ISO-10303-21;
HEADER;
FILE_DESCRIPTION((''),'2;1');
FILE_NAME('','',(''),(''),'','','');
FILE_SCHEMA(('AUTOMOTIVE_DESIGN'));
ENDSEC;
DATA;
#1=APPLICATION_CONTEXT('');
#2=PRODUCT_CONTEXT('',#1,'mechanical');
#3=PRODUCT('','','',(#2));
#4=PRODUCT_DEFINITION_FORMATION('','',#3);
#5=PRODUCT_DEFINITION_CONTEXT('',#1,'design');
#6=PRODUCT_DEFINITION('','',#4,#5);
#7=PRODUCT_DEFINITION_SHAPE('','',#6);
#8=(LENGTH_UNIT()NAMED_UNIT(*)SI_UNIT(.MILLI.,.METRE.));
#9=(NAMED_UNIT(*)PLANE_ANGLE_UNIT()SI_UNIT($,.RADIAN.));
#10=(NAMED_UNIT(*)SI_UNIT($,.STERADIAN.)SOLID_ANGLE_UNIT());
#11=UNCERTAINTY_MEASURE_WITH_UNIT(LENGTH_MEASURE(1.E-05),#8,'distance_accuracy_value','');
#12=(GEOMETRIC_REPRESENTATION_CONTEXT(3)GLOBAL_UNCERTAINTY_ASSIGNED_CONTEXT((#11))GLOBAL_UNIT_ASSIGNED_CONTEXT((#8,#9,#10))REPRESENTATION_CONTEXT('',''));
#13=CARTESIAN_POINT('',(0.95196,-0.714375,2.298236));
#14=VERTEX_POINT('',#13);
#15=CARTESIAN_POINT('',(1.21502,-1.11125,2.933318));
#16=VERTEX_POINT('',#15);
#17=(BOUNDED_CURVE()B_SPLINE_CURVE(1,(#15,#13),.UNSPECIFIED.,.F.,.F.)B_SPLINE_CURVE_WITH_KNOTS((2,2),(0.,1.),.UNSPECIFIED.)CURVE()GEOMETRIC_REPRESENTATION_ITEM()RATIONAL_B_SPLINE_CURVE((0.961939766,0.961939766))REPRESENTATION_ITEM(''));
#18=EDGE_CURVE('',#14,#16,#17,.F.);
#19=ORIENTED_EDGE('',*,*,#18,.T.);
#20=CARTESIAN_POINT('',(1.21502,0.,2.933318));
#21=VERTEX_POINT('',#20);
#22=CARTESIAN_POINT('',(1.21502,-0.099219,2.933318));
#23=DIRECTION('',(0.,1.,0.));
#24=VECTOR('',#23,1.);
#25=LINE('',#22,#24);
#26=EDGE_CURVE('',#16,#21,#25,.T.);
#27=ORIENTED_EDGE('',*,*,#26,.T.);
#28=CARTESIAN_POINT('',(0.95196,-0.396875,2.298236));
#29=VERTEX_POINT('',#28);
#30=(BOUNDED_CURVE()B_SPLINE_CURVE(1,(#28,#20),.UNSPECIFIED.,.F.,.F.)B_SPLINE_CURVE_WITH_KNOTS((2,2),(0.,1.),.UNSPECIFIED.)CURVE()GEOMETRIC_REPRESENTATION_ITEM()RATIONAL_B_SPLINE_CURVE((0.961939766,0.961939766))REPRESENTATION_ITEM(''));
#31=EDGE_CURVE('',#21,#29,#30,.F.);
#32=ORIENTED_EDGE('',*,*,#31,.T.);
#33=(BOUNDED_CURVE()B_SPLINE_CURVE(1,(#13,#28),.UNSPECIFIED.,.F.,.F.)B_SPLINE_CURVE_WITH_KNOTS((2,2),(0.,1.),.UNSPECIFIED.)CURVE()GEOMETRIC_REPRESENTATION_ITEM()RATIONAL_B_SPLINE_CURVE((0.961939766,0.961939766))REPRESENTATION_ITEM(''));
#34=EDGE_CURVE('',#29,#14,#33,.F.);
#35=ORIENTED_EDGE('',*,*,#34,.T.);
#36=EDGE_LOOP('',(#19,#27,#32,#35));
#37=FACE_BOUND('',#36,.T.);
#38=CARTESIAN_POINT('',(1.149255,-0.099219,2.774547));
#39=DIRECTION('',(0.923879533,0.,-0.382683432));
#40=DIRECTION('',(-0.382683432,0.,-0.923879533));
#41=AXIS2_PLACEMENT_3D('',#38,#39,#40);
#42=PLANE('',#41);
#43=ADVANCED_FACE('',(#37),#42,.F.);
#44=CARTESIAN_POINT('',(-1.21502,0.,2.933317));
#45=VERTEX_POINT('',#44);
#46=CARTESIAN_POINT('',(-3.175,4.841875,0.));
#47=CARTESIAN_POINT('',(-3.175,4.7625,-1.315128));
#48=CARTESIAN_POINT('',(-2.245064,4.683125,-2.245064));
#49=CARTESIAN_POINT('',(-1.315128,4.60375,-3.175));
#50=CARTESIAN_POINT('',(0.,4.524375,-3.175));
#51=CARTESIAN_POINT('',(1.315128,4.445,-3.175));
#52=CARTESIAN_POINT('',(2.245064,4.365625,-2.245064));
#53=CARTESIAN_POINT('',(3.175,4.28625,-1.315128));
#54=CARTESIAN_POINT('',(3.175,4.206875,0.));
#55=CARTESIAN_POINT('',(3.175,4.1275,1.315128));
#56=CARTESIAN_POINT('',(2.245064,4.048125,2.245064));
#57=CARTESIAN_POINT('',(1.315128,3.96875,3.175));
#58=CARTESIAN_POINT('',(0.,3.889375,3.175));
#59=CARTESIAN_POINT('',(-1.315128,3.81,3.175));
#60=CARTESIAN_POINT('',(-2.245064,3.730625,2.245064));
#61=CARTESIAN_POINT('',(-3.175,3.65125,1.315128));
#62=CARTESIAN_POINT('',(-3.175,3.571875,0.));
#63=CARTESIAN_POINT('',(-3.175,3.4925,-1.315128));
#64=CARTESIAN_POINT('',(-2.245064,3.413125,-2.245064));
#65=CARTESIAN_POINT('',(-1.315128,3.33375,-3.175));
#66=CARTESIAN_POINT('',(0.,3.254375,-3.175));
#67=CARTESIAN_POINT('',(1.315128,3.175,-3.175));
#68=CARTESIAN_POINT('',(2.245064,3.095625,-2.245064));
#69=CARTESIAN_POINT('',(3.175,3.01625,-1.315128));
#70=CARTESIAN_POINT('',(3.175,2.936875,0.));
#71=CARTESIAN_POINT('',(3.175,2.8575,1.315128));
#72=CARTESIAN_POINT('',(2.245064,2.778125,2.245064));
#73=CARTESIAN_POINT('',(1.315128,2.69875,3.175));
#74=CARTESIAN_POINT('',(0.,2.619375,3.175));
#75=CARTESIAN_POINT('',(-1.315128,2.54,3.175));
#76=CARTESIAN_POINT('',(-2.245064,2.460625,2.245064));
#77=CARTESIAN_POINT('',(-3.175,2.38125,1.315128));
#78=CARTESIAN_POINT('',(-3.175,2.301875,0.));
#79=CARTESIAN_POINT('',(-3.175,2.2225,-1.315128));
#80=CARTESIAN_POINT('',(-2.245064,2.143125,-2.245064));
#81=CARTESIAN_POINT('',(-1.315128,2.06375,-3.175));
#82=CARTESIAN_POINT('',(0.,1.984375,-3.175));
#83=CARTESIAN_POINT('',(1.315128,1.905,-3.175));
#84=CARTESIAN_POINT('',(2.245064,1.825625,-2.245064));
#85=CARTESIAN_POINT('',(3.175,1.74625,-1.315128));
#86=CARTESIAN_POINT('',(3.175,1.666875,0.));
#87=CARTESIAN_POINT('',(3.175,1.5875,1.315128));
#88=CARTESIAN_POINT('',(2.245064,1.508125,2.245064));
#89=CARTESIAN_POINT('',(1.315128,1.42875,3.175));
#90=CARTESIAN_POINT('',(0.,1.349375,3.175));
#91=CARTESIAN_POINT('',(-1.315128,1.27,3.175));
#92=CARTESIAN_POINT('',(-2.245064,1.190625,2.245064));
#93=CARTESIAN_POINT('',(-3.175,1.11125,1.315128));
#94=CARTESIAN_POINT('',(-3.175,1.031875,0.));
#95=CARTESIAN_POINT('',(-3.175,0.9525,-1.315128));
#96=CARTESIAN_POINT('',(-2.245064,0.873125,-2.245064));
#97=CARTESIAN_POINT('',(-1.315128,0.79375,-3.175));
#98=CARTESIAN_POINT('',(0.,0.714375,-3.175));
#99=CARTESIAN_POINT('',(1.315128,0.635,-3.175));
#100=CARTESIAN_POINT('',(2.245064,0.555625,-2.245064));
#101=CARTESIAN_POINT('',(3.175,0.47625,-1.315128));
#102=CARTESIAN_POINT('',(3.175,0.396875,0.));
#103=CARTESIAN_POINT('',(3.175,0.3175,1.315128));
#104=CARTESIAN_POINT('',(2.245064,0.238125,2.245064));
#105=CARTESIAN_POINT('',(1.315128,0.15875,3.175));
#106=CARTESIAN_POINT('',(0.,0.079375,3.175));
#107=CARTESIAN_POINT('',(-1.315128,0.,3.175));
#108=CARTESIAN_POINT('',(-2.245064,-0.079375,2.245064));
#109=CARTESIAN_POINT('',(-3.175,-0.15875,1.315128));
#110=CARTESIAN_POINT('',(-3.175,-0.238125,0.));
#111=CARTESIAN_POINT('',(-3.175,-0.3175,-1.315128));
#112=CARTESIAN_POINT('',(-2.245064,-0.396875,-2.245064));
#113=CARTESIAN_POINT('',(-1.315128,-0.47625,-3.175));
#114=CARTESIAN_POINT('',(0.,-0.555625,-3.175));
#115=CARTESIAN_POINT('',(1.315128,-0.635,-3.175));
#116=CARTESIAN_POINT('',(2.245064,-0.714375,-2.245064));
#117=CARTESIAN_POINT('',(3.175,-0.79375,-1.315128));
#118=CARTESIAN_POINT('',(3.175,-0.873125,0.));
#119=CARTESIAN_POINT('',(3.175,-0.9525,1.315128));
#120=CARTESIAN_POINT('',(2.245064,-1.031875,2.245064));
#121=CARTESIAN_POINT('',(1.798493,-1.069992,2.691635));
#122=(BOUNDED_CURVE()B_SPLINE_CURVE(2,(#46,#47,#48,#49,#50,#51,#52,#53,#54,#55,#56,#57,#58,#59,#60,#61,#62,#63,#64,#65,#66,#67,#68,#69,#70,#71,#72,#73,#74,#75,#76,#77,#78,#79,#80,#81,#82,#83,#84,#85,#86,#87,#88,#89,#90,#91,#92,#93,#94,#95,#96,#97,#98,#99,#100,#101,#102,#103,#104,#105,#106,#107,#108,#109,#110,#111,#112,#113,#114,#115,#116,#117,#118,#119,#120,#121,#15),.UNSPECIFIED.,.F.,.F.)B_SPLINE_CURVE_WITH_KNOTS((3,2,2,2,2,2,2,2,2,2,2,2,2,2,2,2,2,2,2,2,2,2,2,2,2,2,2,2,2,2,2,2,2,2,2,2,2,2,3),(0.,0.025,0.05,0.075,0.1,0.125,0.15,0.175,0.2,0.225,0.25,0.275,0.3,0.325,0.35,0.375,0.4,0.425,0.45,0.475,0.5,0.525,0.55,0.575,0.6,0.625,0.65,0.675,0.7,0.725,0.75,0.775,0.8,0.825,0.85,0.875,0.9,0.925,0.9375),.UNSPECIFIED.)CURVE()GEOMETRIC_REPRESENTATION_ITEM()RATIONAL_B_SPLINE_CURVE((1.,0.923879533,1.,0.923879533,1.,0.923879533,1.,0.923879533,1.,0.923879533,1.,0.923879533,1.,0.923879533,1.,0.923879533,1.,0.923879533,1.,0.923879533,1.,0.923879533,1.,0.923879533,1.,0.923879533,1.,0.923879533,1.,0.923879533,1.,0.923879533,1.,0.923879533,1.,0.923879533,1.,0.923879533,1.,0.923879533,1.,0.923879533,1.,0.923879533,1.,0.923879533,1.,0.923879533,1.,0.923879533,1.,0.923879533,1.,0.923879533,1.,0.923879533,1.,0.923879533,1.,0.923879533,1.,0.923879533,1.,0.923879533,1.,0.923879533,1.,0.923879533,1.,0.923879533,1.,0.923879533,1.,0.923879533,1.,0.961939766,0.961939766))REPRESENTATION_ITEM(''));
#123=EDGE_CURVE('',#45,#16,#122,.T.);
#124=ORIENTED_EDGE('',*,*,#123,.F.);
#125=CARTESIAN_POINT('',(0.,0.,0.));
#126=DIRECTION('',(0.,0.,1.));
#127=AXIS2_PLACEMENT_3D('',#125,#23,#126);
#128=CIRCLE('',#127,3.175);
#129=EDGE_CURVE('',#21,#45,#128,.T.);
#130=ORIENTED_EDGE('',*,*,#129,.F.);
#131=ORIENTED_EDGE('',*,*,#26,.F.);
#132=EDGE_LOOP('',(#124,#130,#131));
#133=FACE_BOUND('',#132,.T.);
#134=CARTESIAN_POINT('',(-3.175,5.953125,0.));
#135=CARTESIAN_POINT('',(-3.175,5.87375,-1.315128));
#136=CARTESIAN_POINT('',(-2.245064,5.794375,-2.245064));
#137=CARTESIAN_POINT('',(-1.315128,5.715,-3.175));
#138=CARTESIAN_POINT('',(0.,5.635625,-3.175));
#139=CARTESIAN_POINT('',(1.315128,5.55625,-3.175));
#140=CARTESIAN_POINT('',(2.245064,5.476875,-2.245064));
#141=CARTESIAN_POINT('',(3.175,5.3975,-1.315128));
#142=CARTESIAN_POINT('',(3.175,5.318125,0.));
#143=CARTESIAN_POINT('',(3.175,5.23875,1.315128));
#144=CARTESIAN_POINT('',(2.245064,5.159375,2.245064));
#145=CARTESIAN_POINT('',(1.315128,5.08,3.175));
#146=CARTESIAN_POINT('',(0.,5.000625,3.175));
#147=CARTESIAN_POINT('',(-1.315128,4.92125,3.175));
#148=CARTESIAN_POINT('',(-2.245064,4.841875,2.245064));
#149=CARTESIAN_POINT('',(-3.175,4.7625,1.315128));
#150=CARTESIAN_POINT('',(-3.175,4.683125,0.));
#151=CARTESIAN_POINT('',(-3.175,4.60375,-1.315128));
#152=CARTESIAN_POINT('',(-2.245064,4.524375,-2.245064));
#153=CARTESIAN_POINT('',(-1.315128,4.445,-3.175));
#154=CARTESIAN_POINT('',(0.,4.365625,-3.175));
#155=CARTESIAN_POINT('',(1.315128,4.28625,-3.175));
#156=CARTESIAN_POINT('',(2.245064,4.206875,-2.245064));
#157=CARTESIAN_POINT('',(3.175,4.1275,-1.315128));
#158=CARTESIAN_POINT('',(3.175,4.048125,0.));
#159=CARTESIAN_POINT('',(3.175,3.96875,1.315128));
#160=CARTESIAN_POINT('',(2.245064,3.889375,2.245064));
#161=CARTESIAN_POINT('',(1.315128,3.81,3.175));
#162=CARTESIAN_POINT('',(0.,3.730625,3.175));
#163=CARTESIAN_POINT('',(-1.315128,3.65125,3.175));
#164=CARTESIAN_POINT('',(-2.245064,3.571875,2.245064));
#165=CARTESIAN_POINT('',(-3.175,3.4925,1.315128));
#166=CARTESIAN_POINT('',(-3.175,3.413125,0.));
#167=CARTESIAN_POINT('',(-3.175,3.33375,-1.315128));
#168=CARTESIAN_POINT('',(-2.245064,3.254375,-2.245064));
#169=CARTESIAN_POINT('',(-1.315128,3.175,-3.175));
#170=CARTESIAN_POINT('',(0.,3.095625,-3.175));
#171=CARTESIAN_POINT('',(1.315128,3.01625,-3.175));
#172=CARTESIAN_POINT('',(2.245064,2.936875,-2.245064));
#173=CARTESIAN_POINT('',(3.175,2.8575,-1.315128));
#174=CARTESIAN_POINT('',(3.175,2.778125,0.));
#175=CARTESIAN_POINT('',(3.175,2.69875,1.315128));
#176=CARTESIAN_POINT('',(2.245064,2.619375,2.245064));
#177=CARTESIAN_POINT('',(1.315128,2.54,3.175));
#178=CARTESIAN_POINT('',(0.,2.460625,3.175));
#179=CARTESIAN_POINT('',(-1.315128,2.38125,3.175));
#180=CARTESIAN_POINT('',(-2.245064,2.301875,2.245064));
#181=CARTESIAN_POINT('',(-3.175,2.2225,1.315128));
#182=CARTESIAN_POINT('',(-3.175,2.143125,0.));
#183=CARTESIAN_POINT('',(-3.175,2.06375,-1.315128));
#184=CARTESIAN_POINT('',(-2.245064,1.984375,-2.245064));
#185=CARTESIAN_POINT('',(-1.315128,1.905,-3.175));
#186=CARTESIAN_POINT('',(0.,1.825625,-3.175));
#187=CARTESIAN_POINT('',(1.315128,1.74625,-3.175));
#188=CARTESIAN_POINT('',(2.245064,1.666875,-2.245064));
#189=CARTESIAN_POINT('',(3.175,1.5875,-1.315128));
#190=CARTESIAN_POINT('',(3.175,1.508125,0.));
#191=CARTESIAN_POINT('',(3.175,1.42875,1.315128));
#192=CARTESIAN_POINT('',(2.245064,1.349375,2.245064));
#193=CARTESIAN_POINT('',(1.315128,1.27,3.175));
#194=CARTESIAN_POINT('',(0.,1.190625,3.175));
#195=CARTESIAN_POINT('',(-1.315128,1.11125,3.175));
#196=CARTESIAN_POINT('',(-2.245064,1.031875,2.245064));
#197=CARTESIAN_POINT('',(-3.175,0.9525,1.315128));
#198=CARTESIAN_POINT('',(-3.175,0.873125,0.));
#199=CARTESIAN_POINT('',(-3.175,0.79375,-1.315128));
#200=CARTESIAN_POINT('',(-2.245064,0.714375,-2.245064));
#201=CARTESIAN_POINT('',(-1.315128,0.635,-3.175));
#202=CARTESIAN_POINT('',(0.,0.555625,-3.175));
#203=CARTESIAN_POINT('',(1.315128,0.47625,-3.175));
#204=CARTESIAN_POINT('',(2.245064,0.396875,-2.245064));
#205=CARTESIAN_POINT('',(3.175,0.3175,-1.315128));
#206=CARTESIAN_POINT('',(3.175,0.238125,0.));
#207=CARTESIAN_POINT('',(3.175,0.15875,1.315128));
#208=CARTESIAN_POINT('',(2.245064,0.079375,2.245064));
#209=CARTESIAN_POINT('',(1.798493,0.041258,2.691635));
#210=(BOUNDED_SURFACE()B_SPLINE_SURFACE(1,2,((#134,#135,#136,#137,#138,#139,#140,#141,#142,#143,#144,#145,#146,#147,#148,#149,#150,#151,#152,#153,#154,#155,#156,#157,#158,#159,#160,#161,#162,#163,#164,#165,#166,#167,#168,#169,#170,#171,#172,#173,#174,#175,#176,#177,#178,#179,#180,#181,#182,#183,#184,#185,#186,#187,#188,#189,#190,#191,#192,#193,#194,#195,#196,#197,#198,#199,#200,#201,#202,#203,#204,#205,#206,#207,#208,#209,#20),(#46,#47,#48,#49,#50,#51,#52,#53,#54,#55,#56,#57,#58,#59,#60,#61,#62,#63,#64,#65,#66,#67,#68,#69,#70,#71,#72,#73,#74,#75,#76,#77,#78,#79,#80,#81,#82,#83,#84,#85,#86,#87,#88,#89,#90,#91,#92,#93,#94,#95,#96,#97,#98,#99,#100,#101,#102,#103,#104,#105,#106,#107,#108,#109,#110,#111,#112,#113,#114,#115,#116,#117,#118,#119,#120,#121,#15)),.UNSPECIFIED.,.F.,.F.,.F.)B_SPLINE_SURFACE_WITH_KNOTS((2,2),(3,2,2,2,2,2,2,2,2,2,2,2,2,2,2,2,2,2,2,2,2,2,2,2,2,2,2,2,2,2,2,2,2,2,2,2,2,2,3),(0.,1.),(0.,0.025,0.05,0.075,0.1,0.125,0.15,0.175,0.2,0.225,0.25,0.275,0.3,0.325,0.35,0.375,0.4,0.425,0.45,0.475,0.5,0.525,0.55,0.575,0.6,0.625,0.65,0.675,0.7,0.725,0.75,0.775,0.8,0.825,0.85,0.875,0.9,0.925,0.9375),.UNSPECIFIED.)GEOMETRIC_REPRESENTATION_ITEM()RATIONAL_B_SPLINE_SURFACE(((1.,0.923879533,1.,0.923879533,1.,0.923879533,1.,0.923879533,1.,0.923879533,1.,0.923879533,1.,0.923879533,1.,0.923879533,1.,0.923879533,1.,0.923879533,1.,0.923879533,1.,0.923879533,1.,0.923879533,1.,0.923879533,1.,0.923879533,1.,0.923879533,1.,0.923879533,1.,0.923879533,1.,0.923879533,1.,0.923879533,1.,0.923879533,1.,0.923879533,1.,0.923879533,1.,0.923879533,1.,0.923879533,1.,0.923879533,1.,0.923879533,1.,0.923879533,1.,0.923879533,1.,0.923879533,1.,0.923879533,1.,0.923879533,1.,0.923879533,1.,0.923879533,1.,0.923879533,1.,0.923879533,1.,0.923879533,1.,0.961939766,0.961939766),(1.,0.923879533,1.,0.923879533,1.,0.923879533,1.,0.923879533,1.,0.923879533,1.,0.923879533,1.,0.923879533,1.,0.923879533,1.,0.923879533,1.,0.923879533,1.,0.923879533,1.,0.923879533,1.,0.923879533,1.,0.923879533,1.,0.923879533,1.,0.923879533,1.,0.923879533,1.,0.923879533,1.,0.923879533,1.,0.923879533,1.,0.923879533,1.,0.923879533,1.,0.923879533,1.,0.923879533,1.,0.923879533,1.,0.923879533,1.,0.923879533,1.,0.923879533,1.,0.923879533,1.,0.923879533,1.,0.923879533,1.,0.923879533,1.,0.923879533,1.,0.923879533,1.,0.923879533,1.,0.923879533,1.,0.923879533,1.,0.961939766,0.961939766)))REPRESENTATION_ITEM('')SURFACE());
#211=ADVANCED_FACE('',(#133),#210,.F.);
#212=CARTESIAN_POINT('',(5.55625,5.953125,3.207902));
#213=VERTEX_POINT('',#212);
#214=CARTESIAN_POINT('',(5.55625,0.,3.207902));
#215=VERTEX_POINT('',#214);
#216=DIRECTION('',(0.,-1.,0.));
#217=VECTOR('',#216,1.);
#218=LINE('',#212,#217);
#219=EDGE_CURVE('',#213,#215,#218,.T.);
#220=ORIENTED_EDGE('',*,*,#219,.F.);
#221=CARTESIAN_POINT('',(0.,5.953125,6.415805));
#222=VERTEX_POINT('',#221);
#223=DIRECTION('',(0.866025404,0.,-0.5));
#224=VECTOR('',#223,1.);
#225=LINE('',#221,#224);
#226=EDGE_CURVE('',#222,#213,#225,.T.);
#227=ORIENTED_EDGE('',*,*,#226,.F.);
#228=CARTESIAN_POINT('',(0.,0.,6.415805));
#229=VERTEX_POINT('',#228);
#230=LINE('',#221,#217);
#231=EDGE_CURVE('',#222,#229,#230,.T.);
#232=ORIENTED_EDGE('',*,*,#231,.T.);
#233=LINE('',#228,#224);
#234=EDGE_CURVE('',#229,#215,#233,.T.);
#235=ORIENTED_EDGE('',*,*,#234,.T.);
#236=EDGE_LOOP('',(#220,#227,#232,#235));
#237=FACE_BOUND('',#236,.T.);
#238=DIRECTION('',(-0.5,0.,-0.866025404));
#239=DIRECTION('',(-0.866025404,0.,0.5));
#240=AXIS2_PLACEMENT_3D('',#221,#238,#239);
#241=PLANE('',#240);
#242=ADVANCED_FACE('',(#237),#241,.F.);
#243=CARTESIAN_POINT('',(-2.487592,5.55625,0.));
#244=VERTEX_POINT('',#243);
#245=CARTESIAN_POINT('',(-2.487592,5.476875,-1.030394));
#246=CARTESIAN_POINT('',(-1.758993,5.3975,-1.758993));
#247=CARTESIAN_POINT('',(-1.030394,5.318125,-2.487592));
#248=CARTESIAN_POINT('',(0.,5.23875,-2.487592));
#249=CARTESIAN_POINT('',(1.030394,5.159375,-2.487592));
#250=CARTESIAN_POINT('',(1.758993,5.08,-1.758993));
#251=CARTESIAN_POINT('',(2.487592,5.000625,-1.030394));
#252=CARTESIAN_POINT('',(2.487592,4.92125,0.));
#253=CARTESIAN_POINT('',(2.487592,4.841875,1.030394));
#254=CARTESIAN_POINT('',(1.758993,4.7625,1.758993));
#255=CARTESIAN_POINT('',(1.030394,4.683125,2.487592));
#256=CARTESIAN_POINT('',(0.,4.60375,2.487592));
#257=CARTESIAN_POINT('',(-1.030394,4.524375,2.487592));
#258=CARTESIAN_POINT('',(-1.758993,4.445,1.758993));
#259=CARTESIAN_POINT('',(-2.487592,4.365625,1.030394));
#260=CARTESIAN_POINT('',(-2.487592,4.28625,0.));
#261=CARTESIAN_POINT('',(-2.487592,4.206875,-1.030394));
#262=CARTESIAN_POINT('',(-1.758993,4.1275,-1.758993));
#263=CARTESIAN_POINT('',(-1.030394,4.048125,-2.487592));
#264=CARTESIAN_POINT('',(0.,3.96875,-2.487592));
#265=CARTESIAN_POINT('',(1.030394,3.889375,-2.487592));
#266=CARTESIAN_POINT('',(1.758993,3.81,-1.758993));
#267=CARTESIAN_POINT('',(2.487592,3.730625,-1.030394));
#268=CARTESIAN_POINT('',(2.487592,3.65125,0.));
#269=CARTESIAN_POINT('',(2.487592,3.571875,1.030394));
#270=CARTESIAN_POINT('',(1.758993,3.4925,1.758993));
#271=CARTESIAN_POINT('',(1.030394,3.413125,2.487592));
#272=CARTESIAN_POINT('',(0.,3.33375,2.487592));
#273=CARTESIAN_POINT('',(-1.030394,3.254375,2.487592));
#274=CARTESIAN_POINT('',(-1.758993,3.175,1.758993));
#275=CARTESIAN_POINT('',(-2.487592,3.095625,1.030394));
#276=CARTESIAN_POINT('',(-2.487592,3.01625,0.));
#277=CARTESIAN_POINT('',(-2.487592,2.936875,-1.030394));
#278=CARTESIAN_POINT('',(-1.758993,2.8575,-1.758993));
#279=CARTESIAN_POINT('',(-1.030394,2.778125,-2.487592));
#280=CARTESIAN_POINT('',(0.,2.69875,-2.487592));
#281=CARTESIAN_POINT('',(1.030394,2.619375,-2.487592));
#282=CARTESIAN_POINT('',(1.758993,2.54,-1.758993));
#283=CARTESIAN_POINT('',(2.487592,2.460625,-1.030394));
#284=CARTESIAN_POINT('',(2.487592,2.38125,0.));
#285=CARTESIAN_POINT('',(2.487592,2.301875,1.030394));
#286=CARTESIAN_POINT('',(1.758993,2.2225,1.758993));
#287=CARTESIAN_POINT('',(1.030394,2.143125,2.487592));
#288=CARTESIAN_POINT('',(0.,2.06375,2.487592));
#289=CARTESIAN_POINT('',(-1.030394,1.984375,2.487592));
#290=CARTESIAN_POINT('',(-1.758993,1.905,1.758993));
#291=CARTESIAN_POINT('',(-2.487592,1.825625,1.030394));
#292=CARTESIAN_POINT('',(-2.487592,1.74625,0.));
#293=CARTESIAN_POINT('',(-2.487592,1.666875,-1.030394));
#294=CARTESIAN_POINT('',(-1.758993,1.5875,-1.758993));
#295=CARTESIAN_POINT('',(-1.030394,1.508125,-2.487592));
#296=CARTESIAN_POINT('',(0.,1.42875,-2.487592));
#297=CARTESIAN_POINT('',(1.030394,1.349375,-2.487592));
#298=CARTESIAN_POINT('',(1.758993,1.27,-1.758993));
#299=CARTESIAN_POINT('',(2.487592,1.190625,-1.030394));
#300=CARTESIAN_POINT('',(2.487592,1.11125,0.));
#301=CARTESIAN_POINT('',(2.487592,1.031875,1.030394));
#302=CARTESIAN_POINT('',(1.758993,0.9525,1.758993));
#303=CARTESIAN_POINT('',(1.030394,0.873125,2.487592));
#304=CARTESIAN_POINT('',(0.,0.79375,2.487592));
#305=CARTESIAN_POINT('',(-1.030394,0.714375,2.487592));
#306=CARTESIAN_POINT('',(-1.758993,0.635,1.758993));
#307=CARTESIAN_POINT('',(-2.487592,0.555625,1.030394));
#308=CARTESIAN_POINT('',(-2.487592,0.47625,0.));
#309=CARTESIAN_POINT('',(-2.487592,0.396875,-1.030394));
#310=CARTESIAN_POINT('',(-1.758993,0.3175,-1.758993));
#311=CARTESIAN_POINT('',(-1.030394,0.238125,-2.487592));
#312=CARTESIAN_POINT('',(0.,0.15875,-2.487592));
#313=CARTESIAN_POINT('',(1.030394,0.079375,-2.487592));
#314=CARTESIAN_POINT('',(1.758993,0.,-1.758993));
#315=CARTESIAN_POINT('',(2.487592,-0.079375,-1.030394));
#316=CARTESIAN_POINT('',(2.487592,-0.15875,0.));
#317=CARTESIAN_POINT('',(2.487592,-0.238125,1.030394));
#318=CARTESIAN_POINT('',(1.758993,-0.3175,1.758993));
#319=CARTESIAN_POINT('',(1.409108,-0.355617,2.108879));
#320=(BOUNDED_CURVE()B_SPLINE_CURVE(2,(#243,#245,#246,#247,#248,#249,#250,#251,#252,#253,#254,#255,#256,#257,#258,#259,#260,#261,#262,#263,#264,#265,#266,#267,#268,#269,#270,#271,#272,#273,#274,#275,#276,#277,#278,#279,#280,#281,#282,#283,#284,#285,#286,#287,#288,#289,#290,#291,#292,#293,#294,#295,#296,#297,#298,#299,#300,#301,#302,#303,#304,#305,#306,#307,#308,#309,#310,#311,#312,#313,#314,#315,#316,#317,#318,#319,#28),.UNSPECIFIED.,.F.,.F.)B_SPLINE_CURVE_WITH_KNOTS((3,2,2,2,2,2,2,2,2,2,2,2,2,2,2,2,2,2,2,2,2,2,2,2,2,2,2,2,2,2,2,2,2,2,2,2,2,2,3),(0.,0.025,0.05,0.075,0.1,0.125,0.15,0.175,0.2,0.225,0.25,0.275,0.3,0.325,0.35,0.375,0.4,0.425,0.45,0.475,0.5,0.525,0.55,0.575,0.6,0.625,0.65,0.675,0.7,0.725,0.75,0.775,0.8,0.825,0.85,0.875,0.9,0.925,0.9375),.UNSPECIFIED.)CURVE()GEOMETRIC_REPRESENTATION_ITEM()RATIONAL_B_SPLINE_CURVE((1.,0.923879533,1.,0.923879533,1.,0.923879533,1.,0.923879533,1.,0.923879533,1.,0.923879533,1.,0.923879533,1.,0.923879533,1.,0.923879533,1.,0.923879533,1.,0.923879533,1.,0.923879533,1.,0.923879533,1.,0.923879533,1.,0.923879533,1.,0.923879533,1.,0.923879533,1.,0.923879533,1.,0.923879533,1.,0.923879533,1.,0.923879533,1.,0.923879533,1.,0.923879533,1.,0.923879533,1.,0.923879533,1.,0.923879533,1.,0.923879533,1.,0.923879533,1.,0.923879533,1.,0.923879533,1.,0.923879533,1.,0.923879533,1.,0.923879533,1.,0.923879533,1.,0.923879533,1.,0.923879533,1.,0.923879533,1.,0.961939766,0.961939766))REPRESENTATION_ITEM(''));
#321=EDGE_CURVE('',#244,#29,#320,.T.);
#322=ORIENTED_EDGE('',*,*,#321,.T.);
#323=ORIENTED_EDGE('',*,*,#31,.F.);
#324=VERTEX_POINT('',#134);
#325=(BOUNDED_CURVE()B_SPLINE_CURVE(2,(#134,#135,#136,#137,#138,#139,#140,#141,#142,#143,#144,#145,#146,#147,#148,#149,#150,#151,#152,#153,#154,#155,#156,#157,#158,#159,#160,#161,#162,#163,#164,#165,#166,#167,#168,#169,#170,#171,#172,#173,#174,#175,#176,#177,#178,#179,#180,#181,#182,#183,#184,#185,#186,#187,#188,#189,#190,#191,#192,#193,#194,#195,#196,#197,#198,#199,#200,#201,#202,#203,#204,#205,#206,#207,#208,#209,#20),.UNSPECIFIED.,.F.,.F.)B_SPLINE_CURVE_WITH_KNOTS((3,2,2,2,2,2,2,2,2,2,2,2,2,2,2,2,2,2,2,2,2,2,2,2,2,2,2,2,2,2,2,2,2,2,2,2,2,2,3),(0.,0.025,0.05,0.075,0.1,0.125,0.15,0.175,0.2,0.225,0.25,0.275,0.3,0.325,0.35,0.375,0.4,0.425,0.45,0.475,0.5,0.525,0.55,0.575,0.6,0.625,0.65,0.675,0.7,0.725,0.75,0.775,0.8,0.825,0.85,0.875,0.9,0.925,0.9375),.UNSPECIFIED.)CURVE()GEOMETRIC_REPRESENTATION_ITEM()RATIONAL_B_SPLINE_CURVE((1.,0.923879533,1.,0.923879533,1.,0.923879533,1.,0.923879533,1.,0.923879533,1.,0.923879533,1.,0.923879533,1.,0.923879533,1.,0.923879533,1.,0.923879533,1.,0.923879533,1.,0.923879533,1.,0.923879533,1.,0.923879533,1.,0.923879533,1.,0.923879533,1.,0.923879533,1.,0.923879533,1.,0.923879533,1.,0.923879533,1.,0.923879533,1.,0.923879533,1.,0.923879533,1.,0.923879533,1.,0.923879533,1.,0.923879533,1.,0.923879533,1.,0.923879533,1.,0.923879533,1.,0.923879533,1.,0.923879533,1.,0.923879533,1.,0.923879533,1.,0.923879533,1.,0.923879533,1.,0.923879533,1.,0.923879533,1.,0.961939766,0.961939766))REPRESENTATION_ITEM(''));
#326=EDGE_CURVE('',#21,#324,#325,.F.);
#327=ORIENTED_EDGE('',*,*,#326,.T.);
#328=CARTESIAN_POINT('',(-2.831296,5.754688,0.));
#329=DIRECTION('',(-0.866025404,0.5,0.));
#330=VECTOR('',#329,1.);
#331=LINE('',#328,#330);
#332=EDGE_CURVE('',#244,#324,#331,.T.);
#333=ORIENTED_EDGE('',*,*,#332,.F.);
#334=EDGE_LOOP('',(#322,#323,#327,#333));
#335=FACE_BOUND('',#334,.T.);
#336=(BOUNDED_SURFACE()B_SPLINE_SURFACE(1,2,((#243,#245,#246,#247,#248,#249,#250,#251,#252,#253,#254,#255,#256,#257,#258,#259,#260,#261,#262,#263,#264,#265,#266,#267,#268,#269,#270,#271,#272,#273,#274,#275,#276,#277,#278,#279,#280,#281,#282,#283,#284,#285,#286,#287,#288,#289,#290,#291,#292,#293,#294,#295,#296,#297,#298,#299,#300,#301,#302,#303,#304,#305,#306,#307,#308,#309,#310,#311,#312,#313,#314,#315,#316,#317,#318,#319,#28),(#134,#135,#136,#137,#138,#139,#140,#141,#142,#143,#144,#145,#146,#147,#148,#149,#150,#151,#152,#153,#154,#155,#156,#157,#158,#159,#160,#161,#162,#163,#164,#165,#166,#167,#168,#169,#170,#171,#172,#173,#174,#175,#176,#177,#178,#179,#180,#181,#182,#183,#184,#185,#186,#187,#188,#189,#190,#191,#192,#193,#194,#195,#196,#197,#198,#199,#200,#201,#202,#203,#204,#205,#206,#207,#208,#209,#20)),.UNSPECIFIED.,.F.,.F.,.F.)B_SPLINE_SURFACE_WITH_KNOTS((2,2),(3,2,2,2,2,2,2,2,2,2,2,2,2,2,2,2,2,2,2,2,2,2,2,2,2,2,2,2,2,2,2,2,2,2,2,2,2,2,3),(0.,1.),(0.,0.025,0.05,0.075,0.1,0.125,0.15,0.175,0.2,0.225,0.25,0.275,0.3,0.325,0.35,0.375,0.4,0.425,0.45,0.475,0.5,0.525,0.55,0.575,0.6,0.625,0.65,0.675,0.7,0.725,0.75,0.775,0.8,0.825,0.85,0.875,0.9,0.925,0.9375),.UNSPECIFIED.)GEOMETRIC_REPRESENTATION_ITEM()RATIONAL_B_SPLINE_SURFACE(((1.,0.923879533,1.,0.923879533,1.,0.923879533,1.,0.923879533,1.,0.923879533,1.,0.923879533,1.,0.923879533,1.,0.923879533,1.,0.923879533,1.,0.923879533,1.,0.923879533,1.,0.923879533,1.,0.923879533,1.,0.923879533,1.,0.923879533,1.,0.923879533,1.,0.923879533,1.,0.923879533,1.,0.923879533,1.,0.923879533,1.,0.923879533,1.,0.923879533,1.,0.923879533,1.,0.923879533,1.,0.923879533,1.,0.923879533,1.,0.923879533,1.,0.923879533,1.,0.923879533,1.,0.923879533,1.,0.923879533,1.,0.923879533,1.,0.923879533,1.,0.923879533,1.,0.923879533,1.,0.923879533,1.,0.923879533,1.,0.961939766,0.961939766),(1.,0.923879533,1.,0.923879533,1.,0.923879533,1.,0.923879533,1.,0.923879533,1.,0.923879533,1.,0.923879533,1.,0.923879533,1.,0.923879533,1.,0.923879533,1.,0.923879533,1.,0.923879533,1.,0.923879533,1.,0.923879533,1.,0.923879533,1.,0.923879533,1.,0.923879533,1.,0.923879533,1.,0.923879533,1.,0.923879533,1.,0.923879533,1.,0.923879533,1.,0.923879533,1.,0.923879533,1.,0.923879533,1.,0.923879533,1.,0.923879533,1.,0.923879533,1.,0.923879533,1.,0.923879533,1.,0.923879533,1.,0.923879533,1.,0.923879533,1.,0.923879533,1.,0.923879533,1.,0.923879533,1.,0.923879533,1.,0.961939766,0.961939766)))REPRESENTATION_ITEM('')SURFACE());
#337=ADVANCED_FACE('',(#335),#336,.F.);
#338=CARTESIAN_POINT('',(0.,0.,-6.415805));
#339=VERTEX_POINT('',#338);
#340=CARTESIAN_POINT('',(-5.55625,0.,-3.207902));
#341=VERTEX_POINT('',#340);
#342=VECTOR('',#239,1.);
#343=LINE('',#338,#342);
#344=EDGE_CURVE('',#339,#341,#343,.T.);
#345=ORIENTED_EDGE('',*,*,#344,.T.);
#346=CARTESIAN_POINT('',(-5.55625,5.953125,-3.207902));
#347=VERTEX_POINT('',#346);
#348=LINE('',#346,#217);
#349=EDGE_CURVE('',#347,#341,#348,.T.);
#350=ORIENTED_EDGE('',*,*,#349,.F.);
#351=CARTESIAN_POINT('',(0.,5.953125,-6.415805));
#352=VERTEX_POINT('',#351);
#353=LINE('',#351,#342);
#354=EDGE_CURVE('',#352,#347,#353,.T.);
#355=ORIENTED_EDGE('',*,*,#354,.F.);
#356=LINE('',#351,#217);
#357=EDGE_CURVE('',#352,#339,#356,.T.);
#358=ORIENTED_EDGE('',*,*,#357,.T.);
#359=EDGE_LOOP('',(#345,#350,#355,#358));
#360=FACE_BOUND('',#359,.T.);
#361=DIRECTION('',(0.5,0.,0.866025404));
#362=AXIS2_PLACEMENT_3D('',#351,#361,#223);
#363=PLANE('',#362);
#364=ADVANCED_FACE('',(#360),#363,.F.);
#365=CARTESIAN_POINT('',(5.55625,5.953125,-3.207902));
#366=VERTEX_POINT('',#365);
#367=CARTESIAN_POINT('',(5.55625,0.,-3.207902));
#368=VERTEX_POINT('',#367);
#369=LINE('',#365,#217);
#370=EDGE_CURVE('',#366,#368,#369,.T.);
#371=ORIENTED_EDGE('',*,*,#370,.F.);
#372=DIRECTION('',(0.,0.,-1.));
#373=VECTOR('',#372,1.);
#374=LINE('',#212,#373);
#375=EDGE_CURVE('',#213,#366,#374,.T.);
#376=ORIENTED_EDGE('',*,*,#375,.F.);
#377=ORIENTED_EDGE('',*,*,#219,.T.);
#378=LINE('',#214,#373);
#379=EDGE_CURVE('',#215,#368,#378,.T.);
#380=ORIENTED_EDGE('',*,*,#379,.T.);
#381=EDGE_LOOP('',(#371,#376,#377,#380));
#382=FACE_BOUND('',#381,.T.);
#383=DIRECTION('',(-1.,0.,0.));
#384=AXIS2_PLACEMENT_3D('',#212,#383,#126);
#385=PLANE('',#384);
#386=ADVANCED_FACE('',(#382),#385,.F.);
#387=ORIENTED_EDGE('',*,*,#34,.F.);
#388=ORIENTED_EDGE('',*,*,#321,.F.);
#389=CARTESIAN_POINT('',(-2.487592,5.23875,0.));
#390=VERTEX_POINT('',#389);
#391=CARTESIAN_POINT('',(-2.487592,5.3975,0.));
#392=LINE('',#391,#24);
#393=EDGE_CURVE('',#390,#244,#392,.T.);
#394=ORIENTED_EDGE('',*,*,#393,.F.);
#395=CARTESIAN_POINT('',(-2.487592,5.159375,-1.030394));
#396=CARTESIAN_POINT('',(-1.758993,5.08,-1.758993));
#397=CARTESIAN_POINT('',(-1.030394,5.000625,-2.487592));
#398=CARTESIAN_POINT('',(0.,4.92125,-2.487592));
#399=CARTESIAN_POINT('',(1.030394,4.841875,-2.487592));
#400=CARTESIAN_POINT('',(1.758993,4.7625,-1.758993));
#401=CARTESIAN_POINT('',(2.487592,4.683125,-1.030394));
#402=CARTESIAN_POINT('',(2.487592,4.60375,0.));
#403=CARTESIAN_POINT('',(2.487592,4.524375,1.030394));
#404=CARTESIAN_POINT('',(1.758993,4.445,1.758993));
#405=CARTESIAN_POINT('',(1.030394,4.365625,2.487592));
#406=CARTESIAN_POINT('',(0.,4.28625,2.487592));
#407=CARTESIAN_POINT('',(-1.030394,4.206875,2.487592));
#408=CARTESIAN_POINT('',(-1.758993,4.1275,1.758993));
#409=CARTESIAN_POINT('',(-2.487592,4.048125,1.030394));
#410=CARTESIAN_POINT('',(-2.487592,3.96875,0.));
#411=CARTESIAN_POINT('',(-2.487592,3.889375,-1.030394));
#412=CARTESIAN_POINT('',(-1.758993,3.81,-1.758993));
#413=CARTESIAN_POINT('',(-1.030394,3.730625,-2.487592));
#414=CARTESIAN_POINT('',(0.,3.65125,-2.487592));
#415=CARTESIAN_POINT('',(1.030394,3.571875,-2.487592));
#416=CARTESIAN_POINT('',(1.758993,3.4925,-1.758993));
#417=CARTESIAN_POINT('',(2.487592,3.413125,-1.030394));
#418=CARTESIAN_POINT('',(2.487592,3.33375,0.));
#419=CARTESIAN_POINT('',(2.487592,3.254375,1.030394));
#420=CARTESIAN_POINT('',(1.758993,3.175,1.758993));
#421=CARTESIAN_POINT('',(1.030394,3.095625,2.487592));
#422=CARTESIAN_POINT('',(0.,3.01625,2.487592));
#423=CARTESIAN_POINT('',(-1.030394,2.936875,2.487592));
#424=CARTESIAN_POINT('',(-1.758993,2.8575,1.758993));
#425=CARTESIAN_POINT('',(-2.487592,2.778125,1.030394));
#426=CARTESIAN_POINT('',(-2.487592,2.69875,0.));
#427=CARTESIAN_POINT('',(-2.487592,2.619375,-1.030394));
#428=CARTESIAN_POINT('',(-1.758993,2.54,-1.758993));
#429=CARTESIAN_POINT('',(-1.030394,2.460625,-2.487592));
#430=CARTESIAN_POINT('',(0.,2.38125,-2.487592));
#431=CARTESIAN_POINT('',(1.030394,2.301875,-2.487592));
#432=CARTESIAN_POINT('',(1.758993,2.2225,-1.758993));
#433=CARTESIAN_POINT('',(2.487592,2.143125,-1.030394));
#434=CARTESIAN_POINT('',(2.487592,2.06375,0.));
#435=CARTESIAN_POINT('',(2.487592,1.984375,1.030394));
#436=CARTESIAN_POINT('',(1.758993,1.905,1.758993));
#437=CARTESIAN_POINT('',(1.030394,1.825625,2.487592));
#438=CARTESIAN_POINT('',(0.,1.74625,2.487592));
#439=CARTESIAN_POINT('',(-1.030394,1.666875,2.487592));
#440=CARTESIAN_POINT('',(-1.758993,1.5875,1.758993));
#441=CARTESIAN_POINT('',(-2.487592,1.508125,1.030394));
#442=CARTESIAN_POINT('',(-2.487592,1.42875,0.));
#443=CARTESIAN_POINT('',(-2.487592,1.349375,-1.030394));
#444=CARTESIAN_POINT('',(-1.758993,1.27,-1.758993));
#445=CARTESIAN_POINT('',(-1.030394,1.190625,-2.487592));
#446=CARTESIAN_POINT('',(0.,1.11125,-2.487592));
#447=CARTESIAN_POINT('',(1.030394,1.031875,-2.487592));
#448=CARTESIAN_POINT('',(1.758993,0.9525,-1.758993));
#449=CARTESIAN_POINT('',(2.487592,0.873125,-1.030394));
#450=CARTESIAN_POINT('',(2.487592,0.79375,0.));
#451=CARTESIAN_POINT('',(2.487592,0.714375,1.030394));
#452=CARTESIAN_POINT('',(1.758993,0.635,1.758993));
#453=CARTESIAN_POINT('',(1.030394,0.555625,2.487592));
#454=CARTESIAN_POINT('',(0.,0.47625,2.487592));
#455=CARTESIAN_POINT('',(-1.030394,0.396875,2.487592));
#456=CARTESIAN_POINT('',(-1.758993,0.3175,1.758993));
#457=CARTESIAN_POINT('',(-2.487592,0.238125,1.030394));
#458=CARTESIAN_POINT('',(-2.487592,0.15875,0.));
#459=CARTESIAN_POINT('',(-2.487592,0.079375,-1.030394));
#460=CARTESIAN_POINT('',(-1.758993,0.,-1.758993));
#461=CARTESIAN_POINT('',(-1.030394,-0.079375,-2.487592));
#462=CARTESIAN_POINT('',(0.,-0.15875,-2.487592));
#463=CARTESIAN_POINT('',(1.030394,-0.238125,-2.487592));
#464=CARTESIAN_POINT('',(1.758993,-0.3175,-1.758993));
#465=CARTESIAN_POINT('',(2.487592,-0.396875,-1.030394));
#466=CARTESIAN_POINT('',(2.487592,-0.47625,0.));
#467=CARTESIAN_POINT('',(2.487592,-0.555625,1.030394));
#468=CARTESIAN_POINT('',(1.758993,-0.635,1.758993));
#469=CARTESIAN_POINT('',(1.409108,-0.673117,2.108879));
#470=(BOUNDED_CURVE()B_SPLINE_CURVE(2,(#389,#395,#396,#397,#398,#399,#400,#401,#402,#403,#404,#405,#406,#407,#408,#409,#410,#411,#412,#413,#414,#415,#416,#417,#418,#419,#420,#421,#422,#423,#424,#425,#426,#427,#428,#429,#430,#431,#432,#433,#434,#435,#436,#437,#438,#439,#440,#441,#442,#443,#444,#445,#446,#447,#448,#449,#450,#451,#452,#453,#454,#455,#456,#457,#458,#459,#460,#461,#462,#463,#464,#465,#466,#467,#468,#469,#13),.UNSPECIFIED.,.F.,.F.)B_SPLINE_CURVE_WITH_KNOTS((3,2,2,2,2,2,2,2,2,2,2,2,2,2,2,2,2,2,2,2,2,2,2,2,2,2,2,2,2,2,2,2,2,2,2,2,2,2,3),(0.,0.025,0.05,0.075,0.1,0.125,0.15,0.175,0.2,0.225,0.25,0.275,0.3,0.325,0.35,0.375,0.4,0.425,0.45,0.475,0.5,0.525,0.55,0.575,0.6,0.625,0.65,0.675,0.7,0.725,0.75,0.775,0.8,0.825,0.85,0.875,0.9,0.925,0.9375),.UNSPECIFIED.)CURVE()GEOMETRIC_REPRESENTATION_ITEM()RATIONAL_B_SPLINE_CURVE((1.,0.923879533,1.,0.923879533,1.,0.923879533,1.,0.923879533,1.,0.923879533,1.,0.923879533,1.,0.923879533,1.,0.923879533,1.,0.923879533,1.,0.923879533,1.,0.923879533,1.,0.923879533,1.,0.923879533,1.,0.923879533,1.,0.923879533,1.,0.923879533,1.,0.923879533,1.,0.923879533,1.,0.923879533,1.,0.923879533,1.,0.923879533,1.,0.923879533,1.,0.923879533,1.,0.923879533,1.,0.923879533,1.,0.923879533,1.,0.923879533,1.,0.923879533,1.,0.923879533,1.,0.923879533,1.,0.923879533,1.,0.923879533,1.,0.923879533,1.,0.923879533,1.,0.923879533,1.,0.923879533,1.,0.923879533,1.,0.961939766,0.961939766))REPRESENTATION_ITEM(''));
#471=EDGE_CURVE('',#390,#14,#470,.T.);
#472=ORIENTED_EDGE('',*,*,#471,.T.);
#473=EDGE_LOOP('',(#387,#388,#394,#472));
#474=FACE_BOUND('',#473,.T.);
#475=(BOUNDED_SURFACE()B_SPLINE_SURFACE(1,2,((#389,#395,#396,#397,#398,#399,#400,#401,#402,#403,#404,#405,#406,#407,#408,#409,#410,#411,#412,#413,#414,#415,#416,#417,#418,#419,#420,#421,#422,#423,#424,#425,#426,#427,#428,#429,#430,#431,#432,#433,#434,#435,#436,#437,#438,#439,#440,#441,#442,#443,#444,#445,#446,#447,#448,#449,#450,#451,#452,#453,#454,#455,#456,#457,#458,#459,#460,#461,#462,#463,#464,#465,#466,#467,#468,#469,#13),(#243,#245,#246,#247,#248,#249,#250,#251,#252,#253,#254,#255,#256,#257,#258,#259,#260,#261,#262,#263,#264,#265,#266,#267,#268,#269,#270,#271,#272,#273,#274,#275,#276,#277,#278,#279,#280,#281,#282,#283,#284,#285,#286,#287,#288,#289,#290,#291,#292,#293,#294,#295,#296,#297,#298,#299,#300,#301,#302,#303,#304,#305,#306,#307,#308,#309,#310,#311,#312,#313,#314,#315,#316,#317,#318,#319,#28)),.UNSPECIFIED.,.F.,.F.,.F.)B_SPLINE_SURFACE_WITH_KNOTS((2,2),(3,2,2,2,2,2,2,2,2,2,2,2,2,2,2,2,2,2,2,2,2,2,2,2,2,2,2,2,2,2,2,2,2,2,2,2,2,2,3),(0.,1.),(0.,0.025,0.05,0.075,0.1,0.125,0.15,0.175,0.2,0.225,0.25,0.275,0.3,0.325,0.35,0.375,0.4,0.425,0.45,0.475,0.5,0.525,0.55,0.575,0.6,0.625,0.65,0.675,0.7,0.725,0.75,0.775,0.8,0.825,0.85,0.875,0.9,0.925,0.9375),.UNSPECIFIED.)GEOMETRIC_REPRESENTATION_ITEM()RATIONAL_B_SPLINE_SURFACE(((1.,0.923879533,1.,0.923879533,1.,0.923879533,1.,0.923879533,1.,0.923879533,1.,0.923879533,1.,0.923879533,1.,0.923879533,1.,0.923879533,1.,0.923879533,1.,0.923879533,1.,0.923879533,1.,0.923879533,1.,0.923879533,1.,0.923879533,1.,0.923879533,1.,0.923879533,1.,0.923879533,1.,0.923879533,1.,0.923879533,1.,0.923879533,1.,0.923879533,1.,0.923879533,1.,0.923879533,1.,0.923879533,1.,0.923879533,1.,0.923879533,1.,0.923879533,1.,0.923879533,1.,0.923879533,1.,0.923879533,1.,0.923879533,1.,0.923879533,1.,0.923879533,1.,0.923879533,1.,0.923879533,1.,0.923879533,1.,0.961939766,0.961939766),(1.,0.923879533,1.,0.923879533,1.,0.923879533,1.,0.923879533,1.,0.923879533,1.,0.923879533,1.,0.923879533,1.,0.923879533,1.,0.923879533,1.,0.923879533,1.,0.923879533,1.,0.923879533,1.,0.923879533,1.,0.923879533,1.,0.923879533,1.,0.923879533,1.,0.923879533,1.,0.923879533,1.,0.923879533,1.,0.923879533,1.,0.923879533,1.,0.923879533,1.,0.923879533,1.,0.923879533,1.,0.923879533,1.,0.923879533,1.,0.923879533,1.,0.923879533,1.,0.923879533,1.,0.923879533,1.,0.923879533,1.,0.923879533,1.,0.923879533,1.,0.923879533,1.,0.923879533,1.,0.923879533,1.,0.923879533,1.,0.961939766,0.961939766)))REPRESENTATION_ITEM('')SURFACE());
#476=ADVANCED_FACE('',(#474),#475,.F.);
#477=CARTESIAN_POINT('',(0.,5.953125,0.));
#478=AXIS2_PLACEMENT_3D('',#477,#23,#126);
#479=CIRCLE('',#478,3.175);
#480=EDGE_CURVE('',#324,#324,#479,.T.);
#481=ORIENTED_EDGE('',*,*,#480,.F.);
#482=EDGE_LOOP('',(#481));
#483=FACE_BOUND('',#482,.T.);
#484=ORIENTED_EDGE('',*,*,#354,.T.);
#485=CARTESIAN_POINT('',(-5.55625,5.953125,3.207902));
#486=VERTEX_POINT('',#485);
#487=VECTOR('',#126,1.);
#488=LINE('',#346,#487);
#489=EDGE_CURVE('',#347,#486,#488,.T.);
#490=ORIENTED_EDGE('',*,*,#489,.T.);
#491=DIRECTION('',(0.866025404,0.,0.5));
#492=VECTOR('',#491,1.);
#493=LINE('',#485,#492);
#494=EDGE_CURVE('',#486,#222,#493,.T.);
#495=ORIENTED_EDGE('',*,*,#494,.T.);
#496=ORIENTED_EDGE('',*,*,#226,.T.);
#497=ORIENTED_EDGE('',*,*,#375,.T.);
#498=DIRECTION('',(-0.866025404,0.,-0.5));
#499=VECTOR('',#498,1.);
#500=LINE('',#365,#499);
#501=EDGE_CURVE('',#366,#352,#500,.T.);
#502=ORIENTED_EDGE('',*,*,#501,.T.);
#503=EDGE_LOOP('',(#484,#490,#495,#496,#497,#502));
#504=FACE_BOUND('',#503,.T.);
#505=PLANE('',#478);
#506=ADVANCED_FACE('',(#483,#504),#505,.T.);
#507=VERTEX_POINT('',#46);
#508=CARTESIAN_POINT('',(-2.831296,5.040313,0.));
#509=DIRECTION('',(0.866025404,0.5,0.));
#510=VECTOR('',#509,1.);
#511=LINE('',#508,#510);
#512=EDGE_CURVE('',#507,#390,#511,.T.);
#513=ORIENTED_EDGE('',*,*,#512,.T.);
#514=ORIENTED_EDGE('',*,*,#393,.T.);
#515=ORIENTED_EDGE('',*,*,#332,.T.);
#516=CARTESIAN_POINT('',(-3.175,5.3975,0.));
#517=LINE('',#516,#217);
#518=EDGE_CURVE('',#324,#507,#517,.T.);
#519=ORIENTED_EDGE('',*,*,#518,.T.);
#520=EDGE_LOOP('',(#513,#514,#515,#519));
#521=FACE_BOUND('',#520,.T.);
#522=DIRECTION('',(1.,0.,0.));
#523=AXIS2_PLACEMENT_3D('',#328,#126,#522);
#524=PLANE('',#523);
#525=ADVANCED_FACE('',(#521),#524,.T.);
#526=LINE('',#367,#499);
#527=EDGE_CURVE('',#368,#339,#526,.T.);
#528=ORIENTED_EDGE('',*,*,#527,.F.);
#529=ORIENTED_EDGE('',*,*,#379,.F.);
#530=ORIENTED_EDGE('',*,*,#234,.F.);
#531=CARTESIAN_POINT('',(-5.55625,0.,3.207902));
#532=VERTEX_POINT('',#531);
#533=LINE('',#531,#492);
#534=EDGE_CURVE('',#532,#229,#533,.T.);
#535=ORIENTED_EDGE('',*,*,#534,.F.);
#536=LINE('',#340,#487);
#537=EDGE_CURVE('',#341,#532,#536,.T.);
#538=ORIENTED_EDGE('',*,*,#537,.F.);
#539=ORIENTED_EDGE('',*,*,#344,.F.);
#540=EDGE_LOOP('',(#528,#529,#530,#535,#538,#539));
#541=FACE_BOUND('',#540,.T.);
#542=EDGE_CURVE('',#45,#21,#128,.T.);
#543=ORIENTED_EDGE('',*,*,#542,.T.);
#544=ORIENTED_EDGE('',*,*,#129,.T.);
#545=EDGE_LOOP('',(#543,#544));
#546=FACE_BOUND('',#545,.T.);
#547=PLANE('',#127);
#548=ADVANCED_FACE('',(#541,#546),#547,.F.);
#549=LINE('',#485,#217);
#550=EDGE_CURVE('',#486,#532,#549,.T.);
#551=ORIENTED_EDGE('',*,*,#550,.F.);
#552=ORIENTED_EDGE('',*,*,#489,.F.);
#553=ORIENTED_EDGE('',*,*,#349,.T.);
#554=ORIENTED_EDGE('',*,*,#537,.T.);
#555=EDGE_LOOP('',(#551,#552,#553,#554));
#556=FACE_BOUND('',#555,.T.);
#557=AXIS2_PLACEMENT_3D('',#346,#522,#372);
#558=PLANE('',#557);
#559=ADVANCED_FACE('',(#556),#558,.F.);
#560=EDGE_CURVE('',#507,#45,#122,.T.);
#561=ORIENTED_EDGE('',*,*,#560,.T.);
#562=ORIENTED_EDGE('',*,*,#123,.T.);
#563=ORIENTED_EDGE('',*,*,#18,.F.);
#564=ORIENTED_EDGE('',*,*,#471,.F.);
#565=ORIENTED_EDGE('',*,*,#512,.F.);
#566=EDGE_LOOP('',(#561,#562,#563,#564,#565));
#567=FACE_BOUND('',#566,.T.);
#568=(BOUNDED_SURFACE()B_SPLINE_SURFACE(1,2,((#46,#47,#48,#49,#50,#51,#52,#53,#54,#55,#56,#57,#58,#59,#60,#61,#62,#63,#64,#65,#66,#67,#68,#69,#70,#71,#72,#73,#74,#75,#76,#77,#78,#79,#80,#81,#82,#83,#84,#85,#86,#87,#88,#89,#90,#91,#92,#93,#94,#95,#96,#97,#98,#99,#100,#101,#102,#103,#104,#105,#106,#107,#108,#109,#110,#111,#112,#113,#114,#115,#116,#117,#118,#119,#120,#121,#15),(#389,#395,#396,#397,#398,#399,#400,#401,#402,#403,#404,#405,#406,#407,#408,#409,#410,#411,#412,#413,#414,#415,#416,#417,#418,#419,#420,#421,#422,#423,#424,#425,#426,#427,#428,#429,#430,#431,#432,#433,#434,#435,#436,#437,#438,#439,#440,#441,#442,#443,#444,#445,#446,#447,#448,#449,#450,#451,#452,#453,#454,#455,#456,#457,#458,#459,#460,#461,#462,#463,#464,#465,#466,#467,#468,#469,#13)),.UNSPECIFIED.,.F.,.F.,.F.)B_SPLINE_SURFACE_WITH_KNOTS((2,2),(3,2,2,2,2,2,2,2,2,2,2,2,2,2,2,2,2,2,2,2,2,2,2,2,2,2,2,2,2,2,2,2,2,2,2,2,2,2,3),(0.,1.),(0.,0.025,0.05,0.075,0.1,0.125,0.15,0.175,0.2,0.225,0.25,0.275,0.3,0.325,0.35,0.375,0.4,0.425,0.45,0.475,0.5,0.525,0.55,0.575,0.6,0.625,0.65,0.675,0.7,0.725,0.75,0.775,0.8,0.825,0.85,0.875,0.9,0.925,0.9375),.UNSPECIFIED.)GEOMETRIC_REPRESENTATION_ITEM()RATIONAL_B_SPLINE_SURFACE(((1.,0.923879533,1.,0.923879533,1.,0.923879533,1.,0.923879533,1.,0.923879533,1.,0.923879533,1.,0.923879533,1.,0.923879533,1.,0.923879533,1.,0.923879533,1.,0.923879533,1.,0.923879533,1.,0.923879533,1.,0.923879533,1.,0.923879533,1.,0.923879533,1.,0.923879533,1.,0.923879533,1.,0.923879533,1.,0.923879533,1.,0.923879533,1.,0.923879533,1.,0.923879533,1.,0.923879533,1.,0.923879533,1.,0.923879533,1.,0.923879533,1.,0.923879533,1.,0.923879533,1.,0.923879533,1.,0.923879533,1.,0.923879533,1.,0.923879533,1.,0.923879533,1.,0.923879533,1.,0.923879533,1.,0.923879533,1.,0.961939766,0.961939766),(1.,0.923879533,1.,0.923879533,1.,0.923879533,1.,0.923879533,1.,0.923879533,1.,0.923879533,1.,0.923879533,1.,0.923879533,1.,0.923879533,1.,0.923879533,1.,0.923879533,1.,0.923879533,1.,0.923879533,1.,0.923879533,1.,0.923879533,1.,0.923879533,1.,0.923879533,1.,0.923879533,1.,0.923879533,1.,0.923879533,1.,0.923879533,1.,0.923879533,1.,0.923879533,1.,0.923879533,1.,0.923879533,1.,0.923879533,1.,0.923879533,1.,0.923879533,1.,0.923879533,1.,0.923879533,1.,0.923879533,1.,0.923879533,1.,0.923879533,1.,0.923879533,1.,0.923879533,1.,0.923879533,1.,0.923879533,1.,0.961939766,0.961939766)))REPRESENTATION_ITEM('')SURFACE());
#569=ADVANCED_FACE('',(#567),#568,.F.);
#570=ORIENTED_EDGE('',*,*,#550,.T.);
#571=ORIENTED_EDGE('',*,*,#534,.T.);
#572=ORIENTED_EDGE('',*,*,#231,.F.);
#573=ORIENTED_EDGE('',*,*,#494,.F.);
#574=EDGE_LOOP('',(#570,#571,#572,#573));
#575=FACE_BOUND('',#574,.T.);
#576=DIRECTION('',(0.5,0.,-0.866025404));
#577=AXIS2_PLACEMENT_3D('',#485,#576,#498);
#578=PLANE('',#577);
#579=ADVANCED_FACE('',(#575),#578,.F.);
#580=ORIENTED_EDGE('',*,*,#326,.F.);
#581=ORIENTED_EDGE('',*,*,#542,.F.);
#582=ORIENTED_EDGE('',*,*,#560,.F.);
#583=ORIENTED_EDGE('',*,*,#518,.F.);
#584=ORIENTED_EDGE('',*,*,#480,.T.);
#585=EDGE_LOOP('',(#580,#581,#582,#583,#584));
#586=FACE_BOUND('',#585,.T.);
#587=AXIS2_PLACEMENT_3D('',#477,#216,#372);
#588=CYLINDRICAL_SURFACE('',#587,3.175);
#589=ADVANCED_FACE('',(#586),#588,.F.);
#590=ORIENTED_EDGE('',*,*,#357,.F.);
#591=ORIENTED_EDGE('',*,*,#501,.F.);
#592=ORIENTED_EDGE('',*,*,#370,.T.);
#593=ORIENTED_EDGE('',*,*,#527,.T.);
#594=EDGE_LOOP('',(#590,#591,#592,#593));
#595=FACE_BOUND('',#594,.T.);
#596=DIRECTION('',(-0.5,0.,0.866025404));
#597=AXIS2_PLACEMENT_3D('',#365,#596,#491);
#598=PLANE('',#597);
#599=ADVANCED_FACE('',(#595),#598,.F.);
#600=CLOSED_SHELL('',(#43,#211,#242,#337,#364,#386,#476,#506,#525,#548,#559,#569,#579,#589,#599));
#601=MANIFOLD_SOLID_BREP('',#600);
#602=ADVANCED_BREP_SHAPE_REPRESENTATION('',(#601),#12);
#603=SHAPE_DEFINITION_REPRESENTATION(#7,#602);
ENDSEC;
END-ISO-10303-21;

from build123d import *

# Parameters (mm, degrees)
SKETCH1_R           = 3.175
BOSS_EXTRUDE1_DEPTH = 5.953125
THREAD1_PITCH       = 1.27


with BuildPart() as part:
    # Sketch1 → Boss-Extrude1 (new body)
    with BuildSketch(Plane(origin=(0, 0, 0), x_dir=(1, 0, 0), z_dir=(0, 1, 0))):
        Polygon((0, 6.415804866), (-5.55625, 3.207902433), (-5.55625, -3.207902433), (0, -6.415804866), (5.55625, -3.207902433), (5.55625, 3.207902433), align=None)
        with Locations(Location((0, 0, 0), (0, 0, 270))):
            Circle(SKETCH1_R, mode=Mode.SUBTRACT)
    extrude(amount=BOSS_EXTRUDE1_DEPTH)

    # Thread1: the profile of Thread Profile1 profile screwed along a right-hand helix of 4.6875 turns, 8 arcs to a turn; built about Z, then put on its axis
    thread1_z = Axis((0, 0, 0), (0, 0, 1))
    thread1_corners = [(3.1753, 0, -0.000173205), (3.1753, 0, 1.111423202), (2.487592339, 0, 0.714374998), (2.487592339, 0, 0.396874998)]
    with BuildLine(mode=Mode.PRIVATE) as thread1_profile:
        Line(thread1_corners[0], thread1_corners[1])
        Line(thread1_corners[1], thread1_corners[2])
        Line(thread1_corners[2], thread1_corners[3])
        Line(thread1_corners[3], thread1_corners[0])
    thread1_cap = Face(thread1_profile.wire())
    thread1_turn_angles = [0, 22.5, 45, 67.5, 90, 112.5, 135, 157.5, 180, 202.5, 225, 247.5, 270, 292.5, 315, 337.5, 360]
    thread1_turn_weights = [1, 0.9238795325112867, 1, 0.9238795325112867, 1, 0.9238795325112867, 1, 0.9238795325112867, 1, 0.9238795325112867, 1, 0.9238795325112867, 1, 0.9238795325112867, 1, 0.9238795325112867, 1]
    thread1_turn_rails = [Edge.make_bspline([Vector(p[0], p[1], 0).rotate(thread1_z, thread1_turn_angles[k]) / thread1_turn_weights[k] + Vector(0, 0, p[2] + THREAD1_PITCH * thread1_turn_angles[k] / 360) for k in range(17)], [0, 0, 0, 1, 1, 2, 2, 3, 3, 4, 4, 5, 5, 6, 6, 7, 7, 8, 8, 8], 2, thread1_turn_weights) for p in thread1_corners]
    thread1_turn_sides = [Face.make_surface_from_curves(thread1_turn_rails[p[0]], thread1_turn_rails[p[1]]) for p in [(0, 1), (1, 2), (2, 3), (3, 0)]]
    thread1_last_angles = [1440, 1462.5, 1485, 1507.5, 1530, 1552.5, 1575, 1597.5, 1620, 1642.5, 1665, 1676.25, 1687.5]
    thread1_last_weights = [1, 0.9238795325112867, 1, 0.9238795325112867, 1, 0.9238795325112867, 1, 0.9238795325112867, 1, 0.9238795325112867, 1, 0.9807852804032304, 1]
    thread1_last_rails = [Edge.make_bspline([Vector(p[0], p[1], 0).rotate(thread1_z, thread1_last_angles[k]) / thread1_last_weights[k] + Vector(0, 0, p[2] + THREAD1_PITCH * thread1_last_angles[k] / 360) for k in range(13)], [0, 0, 0, 1, 1, 2, 2, 3, 3, 4, 4, 5, 5, 6, 6, 6], 2, thread1_last_weights) for p in thread1_corners]
    thread1_last_sides = [Face.make_surface_from_curves(thread1_last_rails[p[0]], thread1_last_rails[p[1]]) for p in [(0, 1), (1, 2), (2, 3), (3, 0)]]
    thread1 = Plane(origin=(0, 5.953125, 0), x_dir=(-1, 0, 0), z_dir=(0, -1, 0)) * Solid(Shell([*[p.moved(Location((0, 0, THREAD1_PITCH * i))) for i in range(4) for p in thread1_turn_sides], *thread1_last_sides, thread1_cap, thread1_cap.rotate(thread1_z, 1687.5).moved(Location((0, 0, THREAD1_PITCH * 1687.5 / 360)))]))
    add(thread1)


solid = part.part
